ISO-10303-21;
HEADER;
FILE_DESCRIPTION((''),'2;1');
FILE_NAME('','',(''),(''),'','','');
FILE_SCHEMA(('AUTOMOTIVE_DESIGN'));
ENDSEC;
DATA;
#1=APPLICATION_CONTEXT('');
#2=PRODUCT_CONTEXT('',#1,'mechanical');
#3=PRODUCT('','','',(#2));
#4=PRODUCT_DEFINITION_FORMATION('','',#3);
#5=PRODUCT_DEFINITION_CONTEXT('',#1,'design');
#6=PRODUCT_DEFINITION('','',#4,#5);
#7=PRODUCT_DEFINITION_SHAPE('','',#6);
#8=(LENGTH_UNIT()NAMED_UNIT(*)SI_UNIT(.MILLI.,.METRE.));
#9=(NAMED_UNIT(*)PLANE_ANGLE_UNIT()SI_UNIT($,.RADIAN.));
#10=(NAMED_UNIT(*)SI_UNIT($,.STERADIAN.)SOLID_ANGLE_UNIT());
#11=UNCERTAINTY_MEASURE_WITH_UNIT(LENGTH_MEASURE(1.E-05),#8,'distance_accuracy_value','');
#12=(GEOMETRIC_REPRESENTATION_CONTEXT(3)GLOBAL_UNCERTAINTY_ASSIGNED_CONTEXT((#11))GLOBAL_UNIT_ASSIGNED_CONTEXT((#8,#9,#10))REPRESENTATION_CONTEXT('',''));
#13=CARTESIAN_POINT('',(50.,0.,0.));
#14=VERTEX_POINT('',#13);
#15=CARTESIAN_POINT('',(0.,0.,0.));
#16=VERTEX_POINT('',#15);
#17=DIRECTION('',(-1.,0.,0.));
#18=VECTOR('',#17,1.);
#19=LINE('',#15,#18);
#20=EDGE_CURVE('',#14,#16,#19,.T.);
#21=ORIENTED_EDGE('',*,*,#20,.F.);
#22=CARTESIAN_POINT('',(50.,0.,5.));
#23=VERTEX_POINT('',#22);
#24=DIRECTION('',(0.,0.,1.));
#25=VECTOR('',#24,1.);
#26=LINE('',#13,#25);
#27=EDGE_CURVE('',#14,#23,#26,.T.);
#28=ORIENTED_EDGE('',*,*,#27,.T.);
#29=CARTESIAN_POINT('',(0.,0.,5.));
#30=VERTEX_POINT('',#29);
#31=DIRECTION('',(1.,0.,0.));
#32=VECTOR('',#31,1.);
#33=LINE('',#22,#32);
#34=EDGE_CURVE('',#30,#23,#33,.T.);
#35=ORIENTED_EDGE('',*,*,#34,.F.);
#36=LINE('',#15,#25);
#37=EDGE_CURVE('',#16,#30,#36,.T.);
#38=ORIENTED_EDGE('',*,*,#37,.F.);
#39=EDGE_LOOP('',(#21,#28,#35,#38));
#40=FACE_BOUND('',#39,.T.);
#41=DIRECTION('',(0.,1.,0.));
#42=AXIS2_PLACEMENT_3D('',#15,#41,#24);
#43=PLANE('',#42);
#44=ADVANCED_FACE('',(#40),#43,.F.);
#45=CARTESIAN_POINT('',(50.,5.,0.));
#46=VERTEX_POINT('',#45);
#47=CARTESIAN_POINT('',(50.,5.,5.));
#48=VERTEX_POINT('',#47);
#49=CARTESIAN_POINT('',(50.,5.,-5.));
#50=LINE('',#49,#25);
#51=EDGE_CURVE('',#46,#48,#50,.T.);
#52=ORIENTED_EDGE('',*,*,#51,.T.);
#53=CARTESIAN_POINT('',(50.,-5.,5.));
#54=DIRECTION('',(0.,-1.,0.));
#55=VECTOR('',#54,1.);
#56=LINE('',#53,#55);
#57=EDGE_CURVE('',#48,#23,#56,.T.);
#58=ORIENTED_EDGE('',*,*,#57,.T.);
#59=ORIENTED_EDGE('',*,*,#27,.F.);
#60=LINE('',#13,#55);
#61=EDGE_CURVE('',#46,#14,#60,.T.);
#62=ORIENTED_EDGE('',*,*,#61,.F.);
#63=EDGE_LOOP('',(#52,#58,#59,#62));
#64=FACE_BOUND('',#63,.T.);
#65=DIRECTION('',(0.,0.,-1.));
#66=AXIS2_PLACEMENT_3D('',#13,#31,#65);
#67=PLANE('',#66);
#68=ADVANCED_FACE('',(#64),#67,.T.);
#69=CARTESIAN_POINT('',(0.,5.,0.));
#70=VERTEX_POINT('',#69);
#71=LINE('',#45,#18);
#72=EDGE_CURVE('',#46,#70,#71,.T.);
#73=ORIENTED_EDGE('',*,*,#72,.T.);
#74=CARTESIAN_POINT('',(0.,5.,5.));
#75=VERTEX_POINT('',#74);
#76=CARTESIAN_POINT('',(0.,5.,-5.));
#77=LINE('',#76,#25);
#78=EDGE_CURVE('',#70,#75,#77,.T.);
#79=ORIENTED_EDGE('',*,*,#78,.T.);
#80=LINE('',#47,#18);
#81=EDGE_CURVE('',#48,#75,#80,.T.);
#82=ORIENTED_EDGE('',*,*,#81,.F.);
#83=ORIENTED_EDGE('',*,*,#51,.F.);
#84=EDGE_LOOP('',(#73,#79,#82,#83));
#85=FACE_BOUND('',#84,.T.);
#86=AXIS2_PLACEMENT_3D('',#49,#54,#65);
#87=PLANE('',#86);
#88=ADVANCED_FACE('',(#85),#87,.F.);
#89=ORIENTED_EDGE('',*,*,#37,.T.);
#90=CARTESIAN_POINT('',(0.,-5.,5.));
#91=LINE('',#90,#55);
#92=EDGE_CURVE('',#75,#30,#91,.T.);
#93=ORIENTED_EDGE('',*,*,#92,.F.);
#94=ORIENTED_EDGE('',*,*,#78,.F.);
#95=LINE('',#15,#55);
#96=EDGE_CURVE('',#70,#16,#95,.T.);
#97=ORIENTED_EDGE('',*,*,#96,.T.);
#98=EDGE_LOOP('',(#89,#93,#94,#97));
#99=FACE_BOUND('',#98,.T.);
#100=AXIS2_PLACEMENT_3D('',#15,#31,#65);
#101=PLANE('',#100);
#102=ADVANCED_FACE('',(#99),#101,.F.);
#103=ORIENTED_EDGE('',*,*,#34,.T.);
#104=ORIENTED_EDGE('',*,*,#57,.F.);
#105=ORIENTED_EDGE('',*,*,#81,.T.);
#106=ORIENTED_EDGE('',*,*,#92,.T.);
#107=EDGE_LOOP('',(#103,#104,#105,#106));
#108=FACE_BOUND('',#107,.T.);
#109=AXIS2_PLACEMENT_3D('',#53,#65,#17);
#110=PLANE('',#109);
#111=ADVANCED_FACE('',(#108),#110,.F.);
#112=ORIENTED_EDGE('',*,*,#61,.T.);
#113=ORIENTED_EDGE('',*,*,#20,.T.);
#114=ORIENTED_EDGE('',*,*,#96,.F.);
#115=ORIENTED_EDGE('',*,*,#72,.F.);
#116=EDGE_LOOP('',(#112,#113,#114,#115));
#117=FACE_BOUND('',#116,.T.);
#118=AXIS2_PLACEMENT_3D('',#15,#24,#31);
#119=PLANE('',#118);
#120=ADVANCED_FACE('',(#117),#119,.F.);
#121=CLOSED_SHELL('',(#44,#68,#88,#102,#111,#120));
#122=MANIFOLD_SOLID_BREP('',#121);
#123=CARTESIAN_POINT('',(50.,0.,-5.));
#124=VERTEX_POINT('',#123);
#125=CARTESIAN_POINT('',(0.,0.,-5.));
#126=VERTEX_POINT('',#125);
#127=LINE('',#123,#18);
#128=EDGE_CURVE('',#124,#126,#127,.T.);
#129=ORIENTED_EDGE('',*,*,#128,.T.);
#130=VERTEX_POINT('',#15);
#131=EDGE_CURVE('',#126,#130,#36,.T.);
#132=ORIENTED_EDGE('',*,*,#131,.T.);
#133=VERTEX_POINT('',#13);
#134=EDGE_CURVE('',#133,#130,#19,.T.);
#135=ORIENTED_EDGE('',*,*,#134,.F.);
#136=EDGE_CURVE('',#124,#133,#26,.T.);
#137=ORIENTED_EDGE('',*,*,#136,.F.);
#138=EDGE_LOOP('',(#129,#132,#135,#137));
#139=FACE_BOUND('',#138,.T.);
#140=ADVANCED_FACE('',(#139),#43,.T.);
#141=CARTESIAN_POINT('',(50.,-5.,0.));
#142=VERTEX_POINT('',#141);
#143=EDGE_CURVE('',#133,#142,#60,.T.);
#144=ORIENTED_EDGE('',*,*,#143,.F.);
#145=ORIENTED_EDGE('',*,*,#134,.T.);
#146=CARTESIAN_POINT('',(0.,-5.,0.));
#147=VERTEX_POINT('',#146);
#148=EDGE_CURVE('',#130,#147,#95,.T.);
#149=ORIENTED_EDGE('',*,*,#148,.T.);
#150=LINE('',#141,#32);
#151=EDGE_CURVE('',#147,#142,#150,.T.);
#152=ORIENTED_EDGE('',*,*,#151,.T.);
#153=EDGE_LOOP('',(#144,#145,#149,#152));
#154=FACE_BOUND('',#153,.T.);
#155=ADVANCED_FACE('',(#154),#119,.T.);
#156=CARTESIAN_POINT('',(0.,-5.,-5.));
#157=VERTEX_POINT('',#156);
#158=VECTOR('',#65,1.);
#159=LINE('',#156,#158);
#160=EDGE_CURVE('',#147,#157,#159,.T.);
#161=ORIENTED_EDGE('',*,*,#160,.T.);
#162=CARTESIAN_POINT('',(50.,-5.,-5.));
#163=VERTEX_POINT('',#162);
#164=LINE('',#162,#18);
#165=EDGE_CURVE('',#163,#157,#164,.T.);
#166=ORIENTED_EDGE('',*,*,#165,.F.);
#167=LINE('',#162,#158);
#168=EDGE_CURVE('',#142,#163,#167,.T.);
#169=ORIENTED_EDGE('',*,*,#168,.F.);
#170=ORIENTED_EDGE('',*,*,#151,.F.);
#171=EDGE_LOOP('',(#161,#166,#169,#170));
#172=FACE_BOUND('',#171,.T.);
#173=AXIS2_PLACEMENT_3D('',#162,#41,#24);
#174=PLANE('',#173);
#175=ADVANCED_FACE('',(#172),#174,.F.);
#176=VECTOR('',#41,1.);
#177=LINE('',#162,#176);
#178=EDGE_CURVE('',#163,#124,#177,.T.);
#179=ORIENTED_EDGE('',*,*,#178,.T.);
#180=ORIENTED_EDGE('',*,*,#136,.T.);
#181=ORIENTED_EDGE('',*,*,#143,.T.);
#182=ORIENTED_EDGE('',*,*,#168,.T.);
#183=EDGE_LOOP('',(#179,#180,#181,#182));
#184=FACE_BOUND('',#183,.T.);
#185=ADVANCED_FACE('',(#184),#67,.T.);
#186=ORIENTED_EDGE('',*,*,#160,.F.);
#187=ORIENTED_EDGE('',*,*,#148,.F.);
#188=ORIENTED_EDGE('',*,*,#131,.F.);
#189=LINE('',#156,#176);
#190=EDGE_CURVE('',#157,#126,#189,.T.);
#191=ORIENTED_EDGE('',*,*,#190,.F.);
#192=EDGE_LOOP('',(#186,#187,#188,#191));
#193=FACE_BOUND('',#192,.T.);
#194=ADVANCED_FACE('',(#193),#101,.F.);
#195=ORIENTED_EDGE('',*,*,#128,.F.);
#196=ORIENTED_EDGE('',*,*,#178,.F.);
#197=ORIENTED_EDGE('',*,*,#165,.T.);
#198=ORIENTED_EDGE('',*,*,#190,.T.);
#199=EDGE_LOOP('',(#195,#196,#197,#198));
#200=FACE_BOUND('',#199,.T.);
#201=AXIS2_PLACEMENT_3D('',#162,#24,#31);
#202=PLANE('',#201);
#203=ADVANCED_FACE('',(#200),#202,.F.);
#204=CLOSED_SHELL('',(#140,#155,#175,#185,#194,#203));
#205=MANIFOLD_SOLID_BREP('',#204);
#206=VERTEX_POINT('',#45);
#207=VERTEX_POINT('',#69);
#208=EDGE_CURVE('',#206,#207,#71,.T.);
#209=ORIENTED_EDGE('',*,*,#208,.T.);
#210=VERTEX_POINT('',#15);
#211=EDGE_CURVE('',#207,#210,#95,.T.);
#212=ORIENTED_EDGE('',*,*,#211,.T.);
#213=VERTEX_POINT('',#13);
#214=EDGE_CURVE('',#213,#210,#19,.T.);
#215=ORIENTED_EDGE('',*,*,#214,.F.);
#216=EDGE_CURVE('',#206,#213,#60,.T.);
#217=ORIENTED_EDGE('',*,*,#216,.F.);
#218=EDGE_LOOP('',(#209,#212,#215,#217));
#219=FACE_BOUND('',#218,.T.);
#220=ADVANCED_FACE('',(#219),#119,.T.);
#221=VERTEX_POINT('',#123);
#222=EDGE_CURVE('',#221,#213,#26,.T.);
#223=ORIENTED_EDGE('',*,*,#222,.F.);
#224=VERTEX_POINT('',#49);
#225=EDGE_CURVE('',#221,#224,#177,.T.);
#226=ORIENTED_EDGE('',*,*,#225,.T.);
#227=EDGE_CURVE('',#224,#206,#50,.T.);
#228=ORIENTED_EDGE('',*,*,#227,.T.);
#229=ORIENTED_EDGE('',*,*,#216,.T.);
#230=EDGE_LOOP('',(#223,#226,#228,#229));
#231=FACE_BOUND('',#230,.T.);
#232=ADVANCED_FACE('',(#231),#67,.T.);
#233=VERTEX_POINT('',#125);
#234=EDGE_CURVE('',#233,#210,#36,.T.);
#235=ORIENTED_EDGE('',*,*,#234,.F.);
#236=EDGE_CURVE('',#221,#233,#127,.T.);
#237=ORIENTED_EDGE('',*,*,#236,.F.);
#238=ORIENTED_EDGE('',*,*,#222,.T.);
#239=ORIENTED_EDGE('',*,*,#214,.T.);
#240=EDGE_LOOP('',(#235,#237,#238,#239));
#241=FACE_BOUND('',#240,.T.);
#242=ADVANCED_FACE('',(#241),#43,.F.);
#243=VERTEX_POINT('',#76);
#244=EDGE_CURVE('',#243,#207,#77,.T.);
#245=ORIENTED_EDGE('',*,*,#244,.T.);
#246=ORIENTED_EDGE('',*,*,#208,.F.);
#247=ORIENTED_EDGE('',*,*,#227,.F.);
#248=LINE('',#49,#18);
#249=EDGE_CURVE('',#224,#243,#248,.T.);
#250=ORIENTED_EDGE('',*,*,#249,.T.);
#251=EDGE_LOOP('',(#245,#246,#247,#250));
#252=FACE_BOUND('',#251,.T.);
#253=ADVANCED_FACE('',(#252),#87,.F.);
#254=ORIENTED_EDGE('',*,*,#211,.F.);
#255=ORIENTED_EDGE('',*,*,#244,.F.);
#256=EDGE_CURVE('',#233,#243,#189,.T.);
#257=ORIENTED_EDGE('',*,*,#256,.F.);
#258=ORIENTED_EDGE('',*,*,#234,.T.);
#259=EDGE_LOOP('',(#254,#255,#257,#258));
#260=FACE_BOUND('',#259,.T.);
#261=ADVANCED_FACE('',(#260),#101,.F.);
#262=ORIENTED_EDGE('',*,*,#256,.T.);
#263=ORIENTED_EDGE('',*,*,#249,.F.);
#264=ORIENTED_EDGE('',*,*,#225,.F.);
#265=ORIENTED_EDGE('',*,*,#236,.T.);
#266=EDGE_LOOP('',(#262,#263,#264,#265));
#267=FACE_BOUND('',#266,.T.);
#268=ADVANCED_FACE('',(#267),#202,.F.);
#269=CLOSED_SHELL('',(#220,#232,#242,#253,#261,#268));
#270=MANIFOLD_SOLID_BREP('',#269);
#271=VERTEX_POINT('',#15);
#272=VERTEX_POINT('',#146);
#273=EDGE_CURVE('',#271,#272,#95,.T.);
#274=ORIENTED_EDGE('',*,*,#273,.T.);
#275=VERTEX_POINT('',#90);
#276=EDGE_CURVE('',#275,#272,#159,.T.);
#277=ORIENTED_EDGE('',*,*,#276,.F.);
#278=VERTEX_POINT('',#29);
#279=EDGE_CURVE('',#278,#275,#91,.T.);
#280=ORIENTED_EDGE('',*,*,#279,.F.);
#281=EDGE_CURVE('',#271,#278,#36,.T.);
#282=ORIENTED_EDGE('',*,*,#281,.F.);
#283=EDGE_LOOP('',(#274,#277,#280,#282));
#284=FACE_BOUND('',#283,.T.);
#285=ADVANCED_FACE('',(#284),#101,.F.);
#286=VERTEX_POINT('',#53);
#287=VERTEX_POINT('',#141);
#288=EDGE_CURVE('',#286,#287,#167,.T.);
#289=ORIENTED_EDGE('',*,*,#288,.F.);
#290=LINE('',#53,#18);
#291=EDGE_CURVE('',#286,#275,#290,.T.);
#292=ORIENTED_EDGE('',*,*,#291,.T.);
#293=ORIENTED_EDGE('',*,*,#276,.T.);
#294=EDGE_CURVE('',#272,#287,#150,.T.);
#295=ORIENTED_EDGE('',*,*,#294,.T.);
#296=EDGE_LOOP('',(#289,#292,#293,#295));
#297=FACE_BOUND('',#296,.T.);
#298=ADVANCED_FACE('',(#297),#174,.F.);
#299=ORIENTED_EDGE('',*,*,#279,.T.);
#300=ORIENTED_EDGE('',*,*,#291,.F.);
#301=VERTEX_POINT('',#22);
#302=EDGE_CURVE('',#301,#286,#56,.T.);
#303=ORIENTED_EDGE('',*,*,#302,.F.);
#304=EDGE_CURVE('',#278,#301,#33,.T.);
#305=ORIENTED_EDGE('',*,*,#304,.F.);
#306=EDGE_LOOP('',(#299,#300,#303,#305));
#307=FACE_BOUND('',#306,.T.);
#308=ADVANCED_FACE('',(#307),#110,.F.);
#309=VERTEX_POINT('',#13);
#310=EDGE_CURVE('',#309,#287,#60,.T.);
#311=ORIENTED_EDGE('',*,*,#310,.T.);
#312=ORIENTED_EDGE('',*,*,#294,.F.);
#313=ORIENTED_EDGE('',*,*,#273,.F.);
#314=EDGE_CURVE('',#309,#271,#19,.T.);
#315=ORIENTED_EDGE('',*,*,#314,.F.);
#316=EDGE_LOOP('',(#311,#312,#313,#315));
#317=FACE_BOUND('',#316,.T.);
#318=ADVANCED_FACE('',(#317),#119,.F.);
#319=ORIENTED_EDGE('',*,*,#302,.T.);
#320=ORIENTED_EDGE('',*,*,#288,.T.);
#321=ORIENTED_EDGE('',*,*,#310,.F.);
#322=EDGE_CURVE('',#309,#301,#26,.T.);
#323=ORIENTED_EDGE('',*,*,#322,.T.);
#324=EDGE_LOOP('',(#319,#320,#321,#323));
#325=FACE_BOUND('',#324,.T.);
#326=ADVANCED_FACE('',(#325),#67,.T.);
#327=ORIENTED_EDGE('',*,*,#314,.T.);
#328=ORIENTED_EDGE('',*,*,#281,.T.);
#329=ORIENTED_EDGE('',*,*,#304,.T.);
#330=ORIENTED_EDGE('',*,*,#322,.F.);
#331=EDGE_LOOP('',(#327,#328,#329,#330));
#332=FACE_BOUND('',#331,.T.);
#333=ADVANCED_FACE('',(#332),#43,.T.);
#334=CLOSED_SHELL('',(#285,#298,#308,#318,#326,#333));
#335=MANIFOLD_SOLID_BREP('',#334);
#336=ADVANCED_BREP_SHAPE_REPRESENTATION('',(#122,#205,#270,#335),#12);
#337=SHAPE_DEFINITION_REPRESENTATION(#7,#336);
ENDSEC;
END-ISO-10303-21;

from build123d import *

# Parameters (mm, degrees)
SKETCH_1_W                 = 10
SKETCH_1_H                 = 10
EXTRUDE_1_DEPTH            = 50
SPLIT_START                = -5
SPLIT_BODIES_1_OUTLINE_W   = 50
SPLIT_BODIES_1_OUTLINE_H   = 5
SPLIT_BODIES_1_DEPTH       = 10
SPLIT_BODIES_1_2_OUTLINE_W = 50
SPLIT_BODIES_1_2_OUTLINE_H = 5
SPLIT_BODIES_1_2_DEPTH     = 5
SPLIT_BODIES_1_3_OUTLINE_W = 50
SPLIT_BODIES_1_3_OUTLINE_H = 5
SPLIT_BODIES_1_3_DEPTH     = 5
SPLIT_BODIES_1_4_OUTLINE_W = 50
SPLIT_BODIES_1_4_OUTLINE_H = 5
SPLIT_BODIES_1_4_DEPTH     = 5
SPLIT_BODIES_1_5_OUTLINE_W = 50
SPLIT_BODIES_1_5_OUTLINE_H = 5
SPLIT_BODIES_1_5_DEPTH     = 5


# Read off the part's stored shape, not the designer's step: Разделить1
with BuildPart() as part:
    # Эскиз1 → Бобышка-Вытянуть1 (new body)
    with BuildSketch(Plane(origin=(0, 0, 0), x_dir=(0, 0, -1), z_dir=(1, 0, 0))):
        Rectangle(SKETCH_1_W, SKETCH_1_H)
    extrude(amount=EXTRUDE_1_DEPTH)

    # Split Bodies 1 outline → Split Bodies 1 (cut)
    with BuildSketch(Plane.XY.offset(SPLIT_START)):
        with Locations((25, 2.5)):
            Rectangle(SPLIT_BODIES_1_OUTLINE_W, SPLIT_BODIES_1_OUTLINE_H)
    extrude(amount=SPLIT_BODIES_1_DEPTH, mode=Mode.SUBTRACT)

    # Split Bodies 1 2 outline → Split Bodies 1 2 (cut)
    with BuildSketch(Plane.XY):
        with Locations((25, -2.5)):
            Rectangle(SPLIT_BODIES_1_2_OUTLINE_W, SPLIT_BODIES_1_2_OUTLINE_H)
    extrude(amount=SPLIT_BODIES_1_2_DEPTH, mode=Mode.SUBTRACT)


with BuildPart() as body_2:
    # Split Bodies 1 3 outline → Split Bodies 1 3 (new body)
    with BuildSketch(Plane.XY):
        with Locations((25, 2.5)):
            Rectangle(SPLIT_BODIES_1_3_OUTLINE_W, SPLIT_BODIES_1_3_OUTLINE_H)
    extrude(amount=SPLIT_BODIES_1_3_DEPTH)


with BuildPart() as body_3:
    # Split Bodies 1 4 outline → Split Bodies 1 4 (new body)
    with BuildSketch(Plane.XY):
        with Locations((25, -2.5)):
            Rectangle(SPLIT_BODIES_1_4_OUTLINE_W, SPLIT_BODIES_1_4_OUTLINE_H)
    extrude(amount=SPLIT_BODIES_1_4_DEPTH)


with BuildPart() as body_4:
    # Split Bodies 1 5 outline → Split Bodies 1 5 (new body)
    with BuildSketch(Plane(origin=(0, 0, 0), x_dir=(1, 0, 0), z_dir=(0, 1, 0))):
        with Locations((25, 2.5)):
            Rectangle(SPLIT_BODIES_1_5_OUTLINE_W, SPLIT_BODIES_1_5_OUTLINE_H)
    extrude(amount=SPLIT_BODIES_1_5_DEPTH)


solid = Compound([part.part, body_2.part, body_3.part, body_4.part])
